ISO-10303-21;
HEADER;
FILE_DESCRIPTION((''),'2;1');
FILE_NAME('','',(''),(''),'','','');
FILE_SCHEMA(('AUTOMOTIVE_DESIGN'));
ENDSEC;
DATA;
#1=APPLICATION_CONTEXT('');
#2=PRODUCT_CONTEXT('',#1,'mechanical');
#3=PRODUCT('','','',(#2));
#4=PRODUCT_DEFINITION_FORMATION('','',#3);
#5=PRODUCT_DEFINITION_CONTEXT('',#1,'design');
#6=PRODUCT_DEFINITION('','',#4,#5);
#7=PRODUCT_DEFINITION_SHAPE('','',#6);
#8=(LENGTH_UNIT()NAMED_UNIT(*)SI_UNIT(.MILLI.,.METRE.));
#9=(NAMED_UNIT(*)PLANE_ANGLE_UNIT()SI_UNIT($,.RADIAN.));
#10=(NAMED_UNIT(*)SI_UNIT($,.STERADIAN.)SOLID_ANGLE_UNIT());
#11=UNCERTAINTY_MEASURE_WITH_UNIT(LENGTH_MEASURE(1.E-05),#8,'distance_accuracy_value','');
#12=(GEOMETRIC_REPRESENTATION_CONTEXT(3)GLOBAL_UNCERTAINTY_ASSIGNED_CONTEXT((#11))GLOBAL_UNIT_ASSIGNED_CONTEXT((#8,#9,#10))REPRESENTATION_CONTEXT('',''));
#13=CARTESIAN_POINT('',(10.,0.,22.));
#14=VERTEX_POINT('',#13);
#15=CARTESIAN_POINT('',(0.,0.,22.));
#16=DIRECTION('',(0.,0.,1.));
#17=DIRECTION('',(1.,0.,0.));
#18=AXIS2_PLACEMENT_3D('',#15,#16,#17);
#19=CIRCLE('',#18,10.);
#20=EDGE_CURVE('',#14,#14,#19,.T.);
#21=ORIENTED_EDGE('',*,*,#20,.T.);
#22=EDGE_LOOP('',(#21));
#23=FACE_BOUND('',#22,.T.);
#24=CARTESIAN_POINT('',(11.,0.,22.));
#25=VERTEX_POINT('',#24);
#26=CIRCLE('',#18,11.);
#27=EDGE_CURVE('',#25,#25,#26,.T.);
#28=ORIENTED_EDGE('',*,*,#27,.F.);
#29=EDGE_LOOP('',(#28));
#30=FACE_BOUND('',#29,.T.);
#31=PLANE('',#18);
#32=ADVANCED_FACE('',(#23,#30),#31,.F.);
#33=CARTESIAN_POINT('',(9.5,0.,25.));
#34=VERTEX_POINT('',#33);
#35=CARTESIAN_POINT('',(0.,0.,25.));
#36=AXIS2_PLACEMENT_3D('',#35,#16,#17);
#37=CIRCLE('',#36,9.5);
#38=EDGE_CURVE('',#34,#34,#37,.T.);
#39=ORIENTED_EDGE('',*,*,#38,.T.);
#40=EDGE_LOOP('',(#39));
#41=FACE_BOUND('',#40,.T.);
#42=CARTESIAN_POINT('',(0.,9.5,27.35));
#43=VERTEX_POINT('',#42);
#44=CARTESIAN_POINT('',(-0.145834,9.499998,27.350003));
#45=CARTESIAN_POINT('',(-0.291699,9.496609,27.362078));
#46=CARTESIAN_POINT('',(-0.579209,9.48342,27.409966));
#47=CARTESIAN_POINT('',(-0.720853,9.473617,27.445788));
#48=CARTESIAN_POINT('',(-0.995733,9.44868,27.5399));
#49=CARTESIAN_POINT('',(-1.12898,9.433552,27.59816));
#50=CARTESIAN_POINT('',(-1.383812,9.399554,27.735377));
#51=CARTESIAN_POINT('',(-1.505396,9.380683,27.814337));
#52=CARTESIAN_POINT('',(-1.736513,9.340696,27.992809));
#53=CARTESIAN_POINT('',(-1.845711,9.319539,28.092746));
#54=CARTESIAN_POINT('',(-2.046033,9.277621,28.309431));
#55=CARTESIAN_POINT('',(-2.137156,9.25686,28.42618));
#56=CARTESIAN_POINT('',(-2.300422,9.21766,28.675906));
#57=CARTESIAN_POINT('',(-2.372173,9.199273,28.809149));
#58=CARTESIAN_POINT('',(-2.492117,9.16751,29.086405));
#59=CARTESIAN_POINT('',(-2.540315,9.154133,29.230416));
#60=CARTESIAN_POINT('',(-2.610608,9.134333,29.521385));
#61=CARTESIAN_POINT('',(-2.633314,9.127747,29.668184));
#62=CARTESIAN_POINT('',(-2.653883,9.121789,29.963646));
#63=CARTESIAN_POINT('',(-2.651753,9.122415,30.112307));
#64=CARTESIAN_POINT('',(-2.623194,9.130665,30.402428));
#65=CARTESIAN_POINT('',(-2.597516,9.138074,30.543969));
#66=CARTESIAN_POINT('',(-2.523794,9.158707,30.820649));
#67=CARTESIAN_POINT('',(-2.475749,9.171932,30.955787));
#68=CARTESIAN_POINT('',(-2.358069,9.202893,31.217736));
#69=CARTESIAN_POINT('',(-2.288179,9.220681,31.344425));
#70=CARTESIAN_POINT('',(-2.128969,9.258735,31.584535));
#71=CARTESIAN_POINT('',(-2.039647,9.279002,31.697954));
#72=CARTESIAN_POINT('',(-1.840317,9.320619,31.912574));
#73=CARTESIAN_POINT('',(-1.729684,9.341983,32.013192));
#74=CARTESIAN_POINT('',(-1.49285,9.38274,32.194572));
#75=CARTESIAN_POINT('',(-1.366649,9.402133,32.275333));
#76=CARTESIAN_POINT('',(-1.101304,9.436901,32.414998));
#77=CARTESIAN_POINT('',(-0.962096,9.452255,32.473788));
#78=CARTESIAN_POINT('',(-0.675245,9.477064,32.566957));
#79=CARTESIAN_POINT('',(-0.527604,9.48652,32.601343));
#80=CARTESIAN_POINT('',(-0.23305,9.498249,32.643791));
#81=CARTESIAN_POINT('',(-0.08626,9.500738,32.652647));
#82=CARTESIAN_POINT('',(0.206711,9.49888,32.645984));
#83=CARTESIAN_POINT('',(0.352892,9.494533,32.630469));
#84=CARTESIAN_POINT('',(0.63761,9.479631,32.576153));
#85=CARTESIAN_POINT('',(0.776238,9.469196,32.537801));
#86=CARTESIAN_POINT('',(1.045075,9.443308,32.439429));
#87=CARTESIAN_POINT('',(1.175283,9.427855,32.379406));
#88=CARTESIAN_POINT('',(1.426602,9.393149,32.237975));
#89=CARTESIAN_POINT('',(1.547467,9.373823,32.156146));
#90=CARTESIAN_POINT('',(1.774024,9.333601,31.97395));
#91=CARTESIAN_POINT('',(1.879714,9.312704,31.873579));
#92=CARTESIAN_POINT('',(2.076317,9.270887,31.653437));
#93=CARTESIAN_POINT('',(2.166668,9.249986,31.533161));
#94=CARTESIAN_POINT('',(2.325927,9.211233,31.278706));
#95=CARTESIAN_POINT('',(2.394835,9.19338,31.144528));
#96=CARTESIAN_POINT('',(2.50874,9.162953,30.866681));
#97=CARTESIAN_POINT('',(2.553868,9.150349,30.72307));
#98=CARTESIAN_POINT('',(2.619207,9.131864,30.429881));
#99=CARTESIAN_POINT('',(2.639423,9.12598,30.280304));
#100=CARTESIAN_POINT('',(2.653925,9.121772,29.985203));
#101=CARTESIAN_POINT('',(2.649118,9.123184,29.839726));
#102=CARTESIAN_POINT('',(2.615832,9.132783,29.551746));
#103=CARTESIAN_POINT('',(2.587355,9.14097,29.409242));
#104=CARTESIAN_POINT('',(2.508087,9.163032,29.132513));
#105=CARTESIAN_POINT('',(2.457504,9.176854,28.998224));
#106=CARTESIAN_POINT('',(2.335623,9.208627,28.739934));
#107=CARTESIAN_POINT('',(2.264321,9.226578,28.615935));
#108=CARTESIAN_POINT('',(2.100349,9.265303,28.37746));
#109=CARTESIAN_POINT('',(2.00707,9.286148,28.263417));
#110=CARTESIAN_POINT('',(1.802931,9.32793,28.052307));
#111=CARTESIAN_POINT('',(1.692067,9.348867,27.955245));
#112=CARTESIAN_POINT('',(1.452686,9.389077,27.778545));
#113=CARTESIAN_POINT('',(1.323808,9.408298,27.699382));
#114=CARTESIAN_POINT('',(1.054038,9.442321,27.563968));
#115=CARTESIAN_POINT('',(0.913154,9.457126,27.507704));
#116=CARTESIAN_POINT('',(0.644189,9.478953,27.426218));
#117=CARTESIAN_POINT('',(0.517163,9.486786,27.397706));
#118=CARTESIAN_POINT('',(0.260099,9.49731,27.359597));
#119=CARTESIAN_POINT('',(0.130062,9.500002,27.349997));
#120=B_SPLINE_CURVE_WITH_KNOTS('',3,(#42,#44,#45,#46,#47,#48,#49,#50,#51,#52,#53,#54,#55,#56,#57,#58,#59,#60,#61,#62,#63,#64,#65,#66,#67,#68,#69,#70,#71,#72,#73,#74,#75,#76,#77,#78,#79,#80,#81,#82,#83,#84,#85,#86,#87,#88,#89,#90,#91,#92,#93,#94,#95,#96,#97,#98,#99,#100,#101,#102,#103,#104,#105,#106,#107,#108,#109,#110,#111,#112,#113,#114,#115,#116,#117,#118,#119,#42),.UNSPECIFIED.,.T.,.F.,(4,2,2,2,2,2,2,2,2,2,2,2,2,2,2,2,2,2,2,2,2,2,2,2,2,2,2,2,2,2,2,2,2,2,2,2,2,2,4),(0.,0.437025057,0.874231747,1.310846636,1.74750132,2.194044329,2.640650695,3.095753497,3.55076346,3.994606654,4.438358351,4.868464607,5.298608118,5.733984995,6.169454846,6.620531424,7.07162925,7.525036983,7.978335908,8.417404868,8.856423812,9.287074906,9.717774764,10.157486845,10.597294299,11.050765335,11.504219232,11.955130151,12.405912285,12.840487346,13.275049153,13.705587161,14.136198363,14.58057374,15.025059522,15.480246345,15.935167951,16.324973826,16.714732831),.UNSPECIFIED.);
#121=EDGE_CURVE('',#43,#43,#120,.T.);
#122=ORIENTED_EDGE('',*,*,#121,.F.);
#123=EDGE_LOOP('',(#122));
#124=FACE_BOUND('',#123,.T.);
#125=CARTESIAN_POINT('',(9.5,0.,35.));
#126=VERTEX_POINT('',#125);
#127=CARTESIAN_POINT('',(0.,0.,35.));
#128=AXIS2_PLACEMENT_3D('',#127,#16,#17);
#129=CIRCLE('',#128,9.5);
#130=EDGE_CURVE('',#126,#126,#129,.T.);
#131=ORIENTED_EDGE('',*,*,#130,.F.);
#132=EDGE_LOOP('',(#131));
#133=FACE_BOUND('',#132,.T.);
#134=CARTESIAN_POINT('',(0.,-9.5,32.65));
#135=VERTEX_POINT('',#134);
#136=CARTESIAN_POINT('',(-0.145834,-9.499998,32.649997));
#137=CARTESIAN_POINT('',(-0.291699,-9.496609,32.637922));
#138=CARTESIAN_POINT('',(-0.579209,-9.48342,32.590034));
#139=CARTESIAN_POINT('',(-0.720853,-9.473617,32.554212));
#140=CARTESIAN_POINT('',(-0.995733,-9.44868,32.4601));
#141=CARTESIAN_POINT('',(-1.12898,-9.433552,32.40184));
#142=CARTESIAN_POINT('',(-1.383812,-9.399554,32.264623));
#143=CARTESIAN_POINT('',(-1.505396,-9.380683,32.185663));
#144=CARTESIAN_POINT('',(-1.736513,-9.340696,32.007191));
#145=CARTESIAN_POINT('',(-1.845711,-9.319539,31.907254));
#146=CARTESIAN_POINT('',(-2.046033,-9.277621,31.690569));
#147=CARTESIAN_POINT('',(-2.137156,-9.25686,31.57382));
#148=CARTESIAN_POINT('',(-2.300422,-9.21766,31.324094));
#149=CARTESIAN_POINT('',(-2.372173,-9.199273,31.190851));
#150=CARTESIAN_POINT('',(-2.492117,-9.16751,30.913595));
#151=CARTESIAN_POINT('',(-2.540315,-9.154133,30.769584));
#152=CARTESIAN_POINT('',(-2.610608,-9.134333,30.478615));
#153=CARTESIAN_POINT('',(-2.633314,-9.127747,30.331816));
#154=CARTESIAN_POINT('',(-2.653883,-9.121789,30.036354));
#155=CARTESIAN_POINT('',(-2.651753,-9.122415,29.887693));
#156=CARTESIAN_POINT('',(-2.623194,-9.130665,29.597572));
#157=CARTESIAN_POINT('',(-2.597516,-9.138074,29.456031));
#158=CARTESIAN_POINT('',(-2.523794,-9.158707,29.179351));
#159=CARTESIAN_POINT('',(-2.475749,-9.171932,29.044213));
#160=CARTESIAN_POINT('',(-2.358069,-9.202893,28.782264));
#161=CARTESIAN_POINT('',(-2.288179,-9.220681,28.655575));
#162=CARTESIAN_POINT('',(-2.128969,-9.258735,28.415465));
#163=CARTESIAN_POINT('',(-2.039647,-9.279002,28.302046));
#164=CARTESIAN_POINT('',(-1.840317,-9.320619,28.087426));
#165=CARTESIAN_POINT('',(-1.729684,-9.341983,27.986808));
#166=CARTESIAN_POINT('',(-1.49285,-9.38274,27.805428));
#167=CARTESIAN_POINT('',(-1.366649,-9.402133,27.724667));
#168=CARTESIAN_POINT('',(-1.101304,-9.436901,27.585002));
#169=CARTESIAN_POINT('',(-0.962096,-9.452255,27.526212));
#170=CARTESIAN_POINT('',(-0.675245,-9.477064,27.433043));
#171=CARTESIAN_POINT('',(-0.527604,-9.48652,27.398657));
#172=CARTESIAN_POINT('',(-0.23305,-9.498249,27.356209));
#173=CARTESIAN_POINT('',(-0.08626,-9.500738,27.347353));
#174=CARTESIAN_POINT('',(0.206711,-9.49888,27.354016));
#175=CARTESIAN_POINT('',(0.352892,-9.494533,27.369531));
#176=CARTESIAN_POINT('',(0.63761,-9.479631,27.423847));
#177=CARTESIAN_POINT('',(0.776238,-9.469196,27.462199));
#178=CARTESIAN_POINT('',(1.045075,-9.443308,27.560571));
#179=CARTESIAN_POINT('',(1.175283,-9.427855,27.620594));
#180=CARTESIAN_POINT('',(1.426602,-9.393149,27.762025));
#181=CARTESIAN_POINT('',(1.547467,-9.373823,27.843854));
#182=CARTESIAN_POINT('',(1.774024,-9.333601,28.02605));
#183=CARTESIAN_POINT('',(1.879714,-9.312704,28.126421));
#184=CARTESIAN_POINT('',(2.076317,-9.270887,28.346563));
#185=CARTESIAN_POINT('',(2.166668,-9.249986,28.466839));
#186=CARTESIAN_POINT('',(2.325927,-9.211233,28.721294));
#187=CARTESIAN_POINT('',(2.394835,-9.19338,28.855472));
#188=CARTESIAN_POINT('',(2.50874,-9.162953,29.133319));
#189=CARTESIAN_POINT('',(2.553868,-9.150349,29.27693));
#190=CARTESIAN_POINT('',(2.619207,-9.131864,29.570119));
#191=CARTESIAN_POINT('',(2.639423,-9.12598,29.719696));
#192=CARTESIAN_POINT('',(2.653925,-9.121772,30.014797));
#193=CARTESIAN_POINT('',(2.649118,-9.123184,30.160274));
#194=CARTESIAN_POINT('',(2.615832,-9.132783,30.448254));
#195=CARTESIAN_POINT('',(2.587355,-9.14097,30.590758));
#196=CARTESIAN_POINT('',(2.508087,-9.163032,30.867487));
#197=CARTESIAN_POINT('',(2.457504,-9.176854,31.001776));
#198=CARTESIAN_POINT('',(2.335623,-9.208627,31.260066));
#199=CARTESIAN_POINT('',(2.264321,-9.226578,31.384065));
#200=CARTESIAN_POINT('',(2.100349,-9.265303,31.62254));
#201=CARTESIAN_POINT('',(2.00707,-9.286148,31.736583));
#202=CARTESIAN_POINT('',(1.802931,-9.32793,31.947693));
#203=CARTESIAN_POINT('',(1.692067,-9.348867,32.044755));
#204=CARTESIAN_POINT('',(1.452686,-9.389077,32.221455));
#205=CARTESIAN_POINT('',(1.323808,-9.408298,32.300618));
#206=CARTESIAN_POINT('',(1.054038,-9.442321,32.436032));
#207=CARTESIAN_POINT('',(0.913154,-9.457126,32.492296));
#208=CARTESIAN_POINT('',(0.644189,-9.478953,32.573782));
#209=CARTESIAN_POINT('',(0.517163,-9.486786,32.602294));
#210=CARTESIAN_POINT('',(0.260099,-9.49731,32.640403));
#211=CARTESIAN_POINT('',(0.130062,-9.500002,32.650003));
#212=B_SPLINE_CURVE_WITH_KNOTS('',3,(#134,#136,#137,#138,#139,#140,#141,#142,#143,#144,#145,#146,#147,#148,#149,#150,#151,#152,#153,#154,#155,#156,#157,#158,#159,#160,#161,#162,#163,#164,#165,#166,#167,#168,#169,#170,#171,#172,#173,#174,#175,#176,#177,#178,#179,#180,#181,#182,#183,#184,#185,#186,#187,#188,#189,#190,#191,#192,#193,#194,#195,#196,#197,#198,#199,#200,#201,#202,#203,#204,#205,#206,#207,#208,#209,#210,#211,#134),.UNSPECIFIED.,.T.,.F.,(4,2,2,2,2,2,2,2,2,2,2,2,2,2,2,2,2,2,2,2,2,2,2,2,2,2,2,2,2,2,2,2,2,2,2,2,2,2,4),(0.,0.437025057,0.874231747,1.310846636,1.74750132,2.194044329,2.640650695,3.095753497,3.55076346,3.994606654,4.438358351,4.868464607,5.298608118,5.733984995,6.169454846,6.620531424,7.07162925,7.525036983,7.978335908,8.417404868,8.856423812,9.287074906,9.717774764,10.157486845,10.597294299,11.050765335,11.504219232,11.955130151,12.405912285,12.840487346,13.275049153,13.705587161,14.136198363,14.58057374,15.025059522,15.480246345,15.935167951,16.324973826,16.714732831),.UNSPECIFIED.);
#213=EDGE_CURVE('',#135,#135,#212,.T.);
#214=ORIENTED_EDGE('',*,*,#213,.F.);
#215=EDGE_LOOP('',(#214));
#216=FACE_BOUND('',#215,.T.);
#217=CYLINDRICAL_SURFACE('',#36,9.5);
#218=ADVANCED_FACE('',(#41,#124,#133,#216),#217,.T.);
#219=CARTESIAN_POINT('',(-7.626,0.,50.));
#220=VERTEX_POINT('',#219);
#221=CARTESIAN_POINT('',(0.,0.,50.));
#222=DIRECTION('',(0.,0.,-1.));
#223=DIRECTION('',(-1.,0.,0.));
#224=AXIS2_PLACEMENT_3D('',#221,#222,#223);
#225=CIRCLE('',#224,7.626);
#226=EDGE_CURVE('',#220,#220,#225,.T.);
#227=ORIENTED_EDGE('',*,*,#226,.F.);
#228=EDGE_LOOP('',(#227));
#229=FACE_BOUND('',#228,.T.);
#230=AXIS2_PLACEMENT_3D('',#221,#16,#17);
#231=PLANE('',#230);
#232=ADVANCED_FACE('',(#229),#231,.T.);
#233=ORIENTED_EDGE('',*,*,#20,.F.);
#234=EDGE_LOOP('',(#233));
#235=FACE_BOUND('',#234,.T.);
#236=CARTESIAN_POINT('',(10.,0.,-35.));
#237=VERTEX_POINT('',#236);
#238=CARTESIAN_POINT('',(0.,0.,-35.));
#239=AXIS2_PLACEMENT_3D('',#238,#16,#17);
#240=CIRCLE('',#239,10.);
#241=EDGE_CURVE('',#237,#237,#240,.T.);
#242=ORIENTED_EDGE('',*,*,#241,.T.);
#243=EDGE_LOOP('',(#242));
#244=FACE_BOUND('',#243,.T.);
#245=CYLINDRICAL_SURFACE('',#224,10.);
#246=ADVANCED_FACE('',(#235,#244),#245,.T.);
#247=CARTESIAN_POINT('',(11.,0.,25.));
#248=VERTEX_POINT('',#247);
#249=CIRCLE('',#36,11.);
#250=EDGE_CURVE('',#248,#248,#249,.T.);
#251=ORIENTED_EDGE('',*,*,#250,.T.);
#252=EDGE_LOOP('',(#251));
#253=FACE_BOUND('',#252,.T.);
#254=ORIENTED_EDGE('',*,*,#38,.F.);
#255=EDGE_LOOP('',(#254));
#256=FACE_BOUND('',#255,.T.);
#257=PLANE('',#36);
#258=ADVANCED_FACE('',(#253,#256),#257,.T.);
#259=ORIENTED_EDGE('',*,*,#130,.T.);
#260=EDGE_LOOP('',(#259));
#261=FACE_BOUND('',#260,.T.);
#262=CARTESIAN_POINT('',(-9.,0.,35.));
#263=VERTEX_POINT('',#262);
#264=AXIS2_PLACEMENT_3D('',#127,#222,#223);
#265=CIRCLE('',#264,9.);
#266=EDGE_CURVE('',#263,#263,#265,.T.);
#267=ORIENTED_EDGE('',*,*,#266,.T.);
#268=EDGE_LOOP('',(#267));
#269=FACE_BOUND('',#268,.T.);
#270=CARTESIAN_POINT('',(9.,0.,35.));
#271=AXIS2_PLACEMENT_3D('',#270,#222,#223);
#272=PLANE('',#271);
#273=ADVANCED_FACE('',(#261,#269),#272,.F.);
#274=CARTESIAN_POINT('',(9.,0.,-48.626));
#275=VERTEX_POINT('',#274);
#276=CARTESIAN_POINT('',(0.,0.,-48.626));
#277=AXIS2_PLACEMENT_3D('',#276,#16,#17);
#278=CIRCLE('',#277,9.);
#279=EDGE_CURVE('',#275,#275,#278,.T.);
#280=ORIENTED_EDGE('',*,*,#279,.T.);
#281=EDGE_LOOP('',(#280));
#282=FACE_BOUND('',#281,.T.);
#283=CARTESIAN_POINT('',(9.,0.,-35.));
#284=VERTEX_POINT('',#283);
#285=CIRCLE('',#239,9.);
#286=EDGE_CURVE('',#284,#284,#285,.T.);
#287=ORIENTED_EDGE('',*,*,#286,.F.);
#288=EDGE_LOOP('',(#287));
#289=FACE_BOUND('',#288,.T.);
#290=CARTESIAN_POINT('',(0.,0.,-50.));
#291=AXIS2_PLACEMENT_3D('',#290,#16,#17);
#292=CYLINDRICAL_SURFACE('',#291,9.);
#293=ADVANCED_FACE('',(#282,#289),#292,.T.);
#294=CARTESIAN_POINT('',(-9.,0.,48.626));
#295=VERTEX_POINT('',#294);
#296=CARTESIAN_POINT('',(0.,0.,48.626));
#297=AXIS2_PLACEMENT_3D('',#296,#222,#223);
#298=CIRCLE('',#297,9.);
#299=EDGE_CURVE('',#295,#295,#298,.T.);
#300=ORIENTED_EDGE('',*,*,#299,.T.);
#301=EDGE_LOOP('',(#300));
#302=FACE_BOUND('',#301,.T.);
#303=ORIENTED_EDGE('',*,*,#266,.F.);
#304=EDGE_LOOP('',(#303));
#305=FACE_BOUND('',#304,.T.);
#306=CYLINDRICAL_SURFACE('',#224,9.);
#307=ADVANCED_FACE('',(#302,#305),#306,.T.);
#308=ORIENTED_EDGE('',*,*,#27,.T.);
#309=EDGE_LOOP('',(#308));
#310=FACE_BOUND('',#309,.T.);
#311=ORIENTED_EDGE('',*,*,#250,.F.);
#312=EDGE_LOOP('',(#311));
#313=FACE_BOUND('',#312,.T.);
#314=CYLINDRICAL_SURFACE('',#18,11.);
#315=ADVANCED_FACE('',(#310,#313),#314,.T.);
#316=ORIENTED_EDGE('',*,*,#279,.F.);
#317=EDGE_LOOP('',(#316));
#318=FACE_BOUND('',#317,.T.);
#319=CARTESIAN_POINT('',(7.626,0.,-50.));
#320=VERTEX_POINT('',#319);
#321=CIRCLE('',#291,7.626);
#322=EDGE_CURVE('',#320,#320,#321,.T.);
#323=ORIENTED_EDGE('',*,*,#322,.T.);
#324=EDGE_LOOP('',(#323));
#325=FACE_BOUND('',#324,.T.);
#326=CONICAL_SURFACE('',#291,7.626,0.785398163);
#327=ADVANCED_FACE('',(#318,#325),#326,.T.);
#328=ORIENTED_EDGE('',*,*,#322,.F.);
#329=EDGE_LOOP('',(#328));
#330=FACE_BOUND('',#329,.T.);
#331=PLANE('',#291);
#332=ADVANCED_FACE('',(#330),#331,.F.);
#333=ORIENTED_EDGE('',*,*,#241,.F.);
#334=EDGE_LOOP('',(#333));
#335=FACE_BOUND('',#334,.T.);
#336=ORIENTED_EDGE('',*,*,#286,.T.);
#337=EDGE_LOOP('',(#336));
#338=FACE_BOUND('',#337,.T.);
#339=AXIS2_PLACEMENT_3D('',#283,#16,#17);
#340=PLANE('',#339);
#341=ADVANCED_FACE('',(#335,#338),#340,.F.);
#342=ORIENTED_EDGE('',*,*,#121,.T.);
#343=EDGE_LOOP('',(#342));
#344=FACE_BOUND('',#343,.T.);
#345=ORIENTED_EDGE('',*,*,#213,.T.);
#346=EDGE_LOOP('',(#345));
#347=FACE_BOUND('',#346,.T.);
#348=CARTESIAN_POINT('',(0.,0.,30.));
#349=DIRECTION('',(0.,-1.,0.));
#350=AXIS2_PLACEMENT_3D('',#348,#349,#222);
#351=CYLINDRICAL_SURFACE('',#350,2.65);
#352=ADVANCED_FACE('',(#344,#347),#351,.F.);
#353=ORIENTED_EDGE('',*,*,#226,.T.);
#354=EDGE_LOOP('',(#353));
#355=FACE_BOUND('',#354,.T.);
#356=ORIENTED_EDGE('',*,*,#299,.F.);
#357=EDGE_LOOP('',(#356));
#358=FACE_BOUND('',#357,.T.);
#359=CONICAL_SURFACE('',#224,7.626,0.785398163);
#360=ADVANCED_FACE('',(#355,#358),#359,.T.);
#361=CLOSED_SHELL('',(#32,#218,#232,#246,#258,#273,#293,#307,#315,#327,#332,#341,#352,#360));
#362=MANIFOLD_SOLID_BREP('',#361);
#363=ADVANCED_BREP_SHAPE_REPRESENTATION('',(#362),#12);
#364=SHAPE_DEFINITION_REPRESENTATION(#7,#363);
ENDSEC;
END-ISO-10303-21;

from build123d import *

# Parameters (mm, degrees)
SKETCH1_R           = 10
BOSS_EXTRUDE1_DEPTH = 50
SKETCH7_R           = 10
SKETCH7_R_2         = 9.5
CUT_EXTRUDE1_DEPTH  = 10
SKETCH10_W          = 2.65
SKETCH10_H          = 10
SKETCH11_R          = 11
BOSS_EXTRUDE2_DEPTH = 3


# Read off the part's stored shape, not the designer's step: M18x2.5 Machine Threads Stud1, M18x2.5 Machine Threads Stud2
with BuildPart() as part:
    # Sketch1 → Boss-Extrude1 (new, symmetric)
    with BuildSketch(Plane.XY):
        Circle(SKETCH1_R)
    extrude(amount=BOSS_EXTRUDE1_DEPTH, both=True)

    # M18x2.5 Machine Threads Stud1 outline → M18x2.5 Machine Threads Stud1 (revolve, cut)
    with BuildSketch(Plane.XZ):
        Polygon((7.626, -50), (10, -50), (10, -35), (9, -35), (9, -48.626), align=None)
    revolve(axis=Axis((0, 0, 0), (0, 0, 1)), mode=Mode.SUBTRACT)

    # M18x2.5 Machine Threads Stud2 outline → M18x2.5 Machine Threads Stud2 (revolve, cut)
    with BuildSketch(Plane.XZ):
        Polygon((10, 50), (7.626, 50), (9, 48.626), (9, 35), (10, 35), align=None)
    revolve(axis=Axis((0, 0, 0), (0, 0, 1)), mode=Mode.SUBTRACT)

    # Sketch7 → Cut-Extrude1 (cut)
    with BuildSketch(Plane.XY.offset(35)):
        Circle(SKETCH7_R)
        Circle(SKETCH7_R_2, mode=Mode.SUBTRACT)
    extrude(amount=-CUT_EXTRUDE1_DEPTH, mode=Mode.SUBTRACT)

    # Sketch10 → M5 Clearance Hole1 (revolve, cut)
    with BuildSketch(Plane(origin=(0, 0, 30), x_dir=(0, 0, -1), z_dir=(1, 0, 0))):
        with Locations((1.325, 5)):
            Rectangle(SKETCH10_W, SKETCH10_H)
    m5_clearance_hole1 = revolve(axis=Axis((0, -6.35, 30), (0, 1, 0)), mode=Mode.SUBTRACT)

    # Mirror2: M5 Clearance Hole1 across plane
    add(m5_clearance_hole1.mirror(Plane.ZX), mode=Mode.SUBTRACT)

    # Sketch11 → Boss-Extrude2 (add)
    with BuildSketch(Plane.XY.offset(25)):
        Circle(SKETCH11_R)
    extrude(amount=-BOSS_EXTRUDE2_DEPTH)


solid = part.part
